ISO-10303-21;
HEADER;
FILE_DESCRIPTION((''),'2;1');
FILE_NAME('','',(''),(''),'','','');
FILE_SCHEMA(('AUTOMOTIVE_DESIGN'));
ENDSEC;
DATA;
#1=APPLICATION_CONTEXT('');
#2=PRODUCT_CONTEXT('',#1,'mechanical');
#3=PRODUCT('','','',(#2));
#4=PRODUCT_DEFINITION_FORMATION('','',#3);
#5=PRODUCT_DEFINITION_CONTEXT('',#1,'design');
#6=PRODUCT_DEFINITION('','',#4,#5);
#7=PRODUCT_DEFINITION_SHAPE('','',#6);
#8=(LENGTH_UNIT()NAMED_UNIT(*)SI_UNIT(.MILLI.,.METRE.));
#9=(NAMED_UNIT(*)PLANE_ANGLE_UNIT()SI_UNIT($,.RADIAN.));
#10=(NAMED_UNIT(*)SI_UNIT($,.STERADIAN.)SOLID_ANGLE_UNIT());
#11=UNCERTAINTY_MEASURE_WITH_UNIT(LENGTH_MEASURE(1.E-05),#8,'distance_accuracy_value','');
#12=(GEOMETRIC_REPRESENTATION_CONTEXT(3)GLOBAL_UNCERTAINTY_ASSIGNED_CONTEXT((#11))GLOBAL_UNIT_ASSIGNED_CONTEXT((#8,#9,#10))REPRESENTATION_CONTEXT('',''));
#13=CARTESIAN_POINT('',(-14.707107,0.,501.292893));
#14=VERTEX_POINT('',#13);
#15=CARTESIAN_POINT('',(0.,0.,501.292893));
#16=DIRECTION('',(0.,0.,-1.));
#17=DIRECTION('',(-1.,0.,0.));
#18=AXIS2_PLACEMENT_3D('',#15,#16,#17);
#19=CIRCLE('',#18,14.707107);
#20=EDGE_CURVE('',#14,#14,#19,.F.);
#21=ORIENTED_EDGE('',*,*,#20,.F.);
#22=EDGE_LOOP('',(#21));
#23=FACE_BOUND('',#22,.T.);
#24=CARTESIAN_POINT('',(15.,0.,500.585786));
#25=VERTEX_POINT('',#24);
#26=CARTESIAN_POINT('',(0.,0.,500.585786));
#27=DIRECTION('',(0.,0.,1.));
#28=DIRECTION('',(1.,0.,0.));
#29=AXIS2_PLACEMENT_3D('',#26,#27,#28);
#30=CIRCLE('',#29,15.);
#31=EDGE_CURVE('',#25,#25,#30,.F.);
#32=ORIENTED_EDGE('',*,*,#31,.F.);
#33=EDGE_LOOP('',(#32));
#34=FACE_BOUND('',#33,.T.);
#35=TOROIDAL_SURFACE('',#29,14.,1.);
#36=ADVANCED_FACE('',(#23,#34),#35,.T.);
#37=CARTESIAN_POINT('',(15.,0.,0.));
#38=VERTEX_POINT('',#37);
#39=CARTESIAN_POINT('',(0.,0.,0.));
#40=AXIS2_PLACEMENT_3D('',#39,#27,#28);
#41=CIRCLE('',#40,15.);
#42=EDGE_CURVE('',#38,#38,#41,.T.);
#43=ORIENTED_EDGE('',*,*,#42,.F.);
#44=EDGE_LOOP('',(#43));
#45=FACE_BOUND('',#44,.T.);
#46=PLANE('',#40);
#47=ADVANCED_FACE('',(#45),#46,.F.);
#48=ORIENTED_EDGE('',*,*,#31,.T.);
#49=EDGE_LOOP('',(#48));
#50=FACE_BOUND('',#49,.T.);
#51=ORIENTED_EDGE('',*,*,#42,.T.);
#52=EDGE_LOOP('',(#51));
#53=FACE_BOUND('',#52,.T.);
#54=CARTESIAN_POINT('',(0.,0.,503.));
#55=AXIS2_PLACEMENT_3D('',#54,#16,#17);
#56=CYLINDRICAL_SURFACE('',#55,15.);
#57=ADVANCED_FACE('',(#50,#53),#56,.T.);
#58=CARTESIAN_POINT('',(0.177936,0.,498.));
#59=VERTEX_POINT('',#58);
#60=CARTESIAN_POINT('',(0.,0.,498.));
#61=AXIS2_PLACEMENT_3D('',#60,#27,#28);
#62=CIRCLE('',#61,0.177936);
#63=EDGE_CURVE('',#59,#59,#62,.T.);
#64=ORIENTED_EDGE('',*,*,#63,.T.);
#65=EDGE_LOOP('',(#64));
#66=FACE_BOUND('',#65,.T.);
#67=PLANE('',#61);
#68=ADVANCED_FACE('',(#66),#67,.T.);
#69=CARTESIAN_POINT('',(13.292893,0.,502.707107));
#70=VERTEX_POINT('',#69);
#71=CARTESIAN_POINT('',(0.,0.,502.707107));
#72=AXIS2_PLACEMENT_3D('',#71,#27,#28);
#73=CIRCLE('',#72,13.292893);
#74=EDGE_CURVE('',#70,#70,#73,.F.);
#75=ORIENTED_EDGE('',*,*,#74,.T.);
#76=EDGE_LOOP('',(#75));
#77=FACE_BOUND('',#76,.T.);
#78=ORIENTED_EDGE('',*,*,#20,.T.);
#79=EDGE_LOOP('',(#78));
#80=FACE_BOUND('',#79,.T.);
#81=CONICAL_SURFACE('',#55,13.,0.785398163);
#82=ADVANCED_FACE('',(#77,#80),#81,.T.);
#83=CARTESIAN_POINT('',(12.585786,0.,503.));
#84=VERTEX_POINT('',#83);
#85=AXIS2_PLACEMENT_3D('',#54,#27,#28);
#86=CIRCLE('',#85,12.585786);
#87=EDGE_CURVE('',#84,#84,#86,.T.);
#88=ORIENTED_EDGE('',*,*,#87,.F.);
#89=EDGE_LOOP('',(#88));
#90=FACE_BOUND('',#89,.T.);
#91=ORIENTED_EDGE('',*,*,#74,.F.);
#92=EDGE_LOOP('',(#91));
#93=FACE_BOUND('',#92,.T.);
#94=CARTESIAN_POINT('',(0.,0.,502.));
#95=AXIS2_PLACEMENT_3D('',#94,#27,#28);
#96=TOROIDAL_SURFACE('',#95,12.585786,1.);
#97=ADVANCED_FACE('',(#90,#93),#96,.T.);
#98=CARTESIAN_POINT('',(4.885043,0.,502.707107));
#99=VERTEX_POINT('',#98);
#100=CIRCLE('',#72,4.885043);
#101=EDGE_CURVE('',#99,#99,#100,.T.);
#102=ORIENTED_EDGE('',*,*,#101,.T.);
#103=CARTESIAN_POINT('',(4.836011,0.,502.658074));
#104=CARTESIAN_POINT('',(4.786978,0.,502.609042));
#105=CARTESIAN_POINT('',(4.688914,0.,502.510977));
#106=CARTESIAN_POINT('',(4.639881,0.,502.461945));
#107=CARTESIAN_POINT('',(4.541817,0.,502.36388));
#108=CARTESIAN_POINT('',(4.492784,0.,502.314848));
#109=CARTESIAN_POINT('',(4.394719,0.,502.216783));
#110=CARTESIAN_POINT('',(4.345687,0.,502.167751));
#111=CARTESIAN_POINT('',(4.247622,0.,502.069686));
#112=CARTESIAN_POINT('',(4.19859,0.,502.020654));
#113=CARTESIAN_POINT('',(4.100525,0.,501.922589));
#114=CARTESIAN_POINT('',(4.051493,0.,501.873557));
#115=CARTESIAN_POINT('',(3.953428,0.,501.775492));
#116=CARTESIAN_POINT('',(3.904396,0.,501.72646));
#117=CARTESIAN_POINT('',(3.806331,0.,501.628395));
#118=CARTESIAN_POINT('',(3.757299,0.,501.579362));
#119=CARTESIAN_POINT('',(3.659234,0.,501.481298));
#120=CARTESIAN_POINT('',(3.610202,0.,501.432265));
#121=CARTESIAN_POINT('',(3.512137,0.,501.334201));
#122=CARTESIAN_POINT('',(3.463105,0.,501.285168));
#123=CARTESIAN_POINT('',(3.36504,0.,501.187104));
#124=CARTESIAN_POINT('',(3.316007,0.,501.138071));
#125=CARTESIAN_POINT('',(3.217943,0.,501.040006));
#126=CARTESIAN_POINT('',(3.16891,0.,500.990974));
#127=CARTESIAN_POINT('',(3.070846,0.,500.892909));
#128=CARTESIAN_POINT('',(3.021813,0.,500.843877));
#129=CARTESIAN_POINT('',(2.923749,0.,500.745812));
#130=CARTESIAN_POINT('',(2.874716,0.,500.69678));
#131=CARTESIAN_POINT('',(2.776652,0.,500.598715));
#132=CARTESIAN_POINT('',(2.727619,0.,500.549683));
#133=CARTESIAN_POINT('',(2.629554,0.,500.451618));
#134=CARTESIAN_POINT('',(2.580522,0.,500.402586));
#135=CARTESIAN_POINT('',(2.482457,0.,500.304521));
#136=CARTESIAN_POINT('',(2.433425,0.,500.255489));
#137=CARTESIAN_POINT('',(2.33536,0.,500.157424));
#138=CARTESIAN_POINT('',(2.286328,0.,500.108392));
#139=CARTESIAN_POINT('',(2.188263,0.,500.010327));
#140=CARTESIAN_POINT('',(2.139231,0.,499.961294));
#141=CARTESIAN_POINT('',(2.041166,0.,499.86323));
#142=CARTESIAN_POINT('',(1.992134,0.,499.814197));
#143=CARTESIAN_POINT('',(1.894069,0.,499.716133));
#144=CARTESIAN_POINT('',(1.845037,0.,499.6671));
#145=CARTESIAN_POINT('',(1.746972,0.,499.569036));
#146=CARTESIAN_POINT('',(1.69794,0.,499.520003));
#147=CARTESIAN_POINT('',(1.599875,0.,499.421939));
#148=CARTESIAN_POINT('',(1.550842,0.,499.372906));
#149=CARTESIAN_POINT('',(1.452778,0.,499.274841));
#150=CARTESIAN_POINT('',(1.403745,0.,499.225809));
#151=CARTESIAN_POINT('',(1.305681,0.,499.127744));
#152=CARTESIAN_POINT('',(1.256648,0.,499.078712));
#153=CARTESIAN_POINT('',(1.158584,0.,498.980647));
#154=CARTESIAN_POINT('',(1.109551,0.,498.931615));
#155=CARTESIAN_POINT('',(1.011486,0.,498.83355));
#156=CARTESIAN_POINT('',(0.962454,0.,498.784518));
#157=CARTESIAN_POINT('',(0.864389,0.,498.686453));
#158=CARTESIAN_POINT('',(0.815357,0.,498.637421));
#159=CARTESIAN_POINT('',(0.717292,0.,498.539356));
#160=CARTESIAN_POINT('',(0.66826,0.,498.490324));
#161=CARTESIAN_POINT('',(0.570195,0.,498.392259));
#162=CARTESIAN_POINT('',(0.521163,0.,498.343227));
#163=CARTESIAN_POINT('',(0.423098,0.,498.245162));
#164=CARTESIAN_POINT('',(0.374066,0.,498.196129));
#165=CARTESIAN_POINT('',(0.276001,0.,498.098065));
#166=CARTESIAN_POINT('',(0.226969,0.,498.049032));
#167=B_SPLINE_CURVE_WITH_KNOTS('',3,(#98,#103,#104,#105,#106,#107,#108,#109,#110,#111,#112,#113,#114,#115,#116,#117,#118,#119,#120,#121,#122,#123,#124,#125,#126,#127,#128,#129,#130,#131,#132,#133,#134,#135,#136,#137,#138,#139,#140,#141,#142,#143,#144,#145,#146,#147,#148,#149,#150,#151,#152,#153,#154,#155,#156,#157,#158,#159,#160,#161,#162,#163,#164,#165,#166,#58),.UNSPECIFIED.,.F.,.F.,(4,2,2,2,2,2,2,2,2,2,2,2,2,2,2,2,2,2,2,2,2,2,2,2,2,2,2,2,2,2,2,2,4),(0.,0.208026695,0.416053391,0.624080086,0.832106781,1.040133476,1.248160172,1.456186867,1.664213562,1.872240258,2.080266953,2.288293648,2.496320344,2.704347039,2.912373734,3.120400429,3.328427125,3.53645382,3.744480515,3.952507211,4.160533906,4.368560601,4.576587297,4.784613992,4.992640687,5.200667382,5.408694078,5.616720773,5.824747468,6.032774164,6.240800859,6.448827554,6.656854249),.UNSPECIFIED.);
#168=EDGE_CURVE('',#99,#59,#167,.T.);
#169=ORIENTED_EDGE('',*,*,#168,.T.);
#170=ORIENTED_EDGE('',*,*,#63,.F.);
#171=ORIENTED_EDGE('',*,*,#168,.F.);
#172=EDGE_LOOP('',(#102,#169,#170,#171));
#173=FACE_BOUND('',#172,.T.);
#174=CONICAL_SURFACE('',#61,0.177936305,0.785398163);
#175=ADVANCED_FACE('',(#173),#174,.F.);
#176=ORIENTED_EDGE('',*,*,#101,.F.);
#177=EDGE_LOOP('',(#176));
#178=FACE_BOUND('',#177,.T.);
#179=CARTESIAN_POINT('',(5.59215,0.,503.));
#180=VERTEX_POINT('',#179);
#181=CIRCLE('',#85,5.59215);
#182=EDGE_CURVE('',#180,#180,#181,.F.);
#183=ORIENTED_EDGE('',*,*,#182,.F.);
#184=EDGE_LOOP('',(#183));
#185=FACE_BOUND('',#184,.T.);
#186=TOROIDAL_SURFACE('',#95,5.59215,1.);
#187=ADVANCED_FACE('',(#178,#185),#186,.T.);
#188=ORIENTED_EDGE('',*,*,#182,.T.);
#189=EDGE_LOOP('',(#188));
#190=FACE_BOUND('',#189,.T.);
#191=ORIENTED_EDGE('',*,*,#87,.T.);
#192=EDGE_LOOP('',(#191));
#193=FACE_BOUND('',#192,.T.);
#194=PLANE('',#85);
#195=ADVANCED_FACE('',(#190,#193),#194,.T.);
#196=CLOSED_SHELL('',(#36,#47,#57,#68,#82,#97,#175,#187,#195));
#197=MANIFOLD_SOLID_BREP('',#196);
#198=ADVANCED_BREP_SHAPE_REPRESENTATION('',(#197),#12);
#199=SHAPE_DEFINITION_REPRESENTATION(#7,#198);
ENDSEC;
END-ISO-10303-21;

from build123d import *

# Parameters (mm, degrees)
SKETCH1_R           = 15
BOSS_EXTRUDE1_DEPTH = 503
CHAMFER1_SIZE       = 2
SKETCH2_R           = 5.177936305
CUT_EXTRUDE1_DEPTH  = 5
CHAMFER2_SIZE       = 5


with BuildPart() as part:
    # Sketch1 → Boss-Extrude1 (new body)
    with BuildSketch(Plane.XY):
        Circle(SKETCH1_R)
    extrude(amount=BOSS_EXTRUDE1_DEPTH)

    # Chamfer1
    chamfer1_edges = [part.edges().sort_by_distance(p)[0] for p in [
        (-15, 0, 503),
    ]]
    chamfer(chamfer1_edges, length=CHAMFER1_SIZE)

    # Sketch2 → Cut-Extrude1 (cut)
    with BuildSketch(Plane.XY.offset(503)):
        Circle(SKETCH2_R)
    extrude(amount=-CUT_EXTRUDE1_DEPTH, mode=Mode.SUBTRACT)

    # Chamfer2
    chamfer2_edges = [part.edges().sort_by_distance(p)[0] for p in [
        (-5.177936305, 0, 498),
    ]]
    chamfer(chamfer2_edges, length=CHAMFER2_SIZE - 0.0001)  # a hair under: the kernel refuses the full size

    # Fillet1: read off the stored shape, not the designer's step
    # Fillet1 outline → Fillet1 (revolve, cut)
    with BuildSketch(Plane.XZ):
        with BuildLine():
            ThreePointArc((14.707106781, 501.292893219), (14.923879533, 500.96846987), (15, 500.585786438))
            Line((15, 500.585786438), (15, 501.292893219))
            Line((15, 501.292893219), (14.707106781, 501.292893219))
        make_face()
        with BuildLine():
            ThreePointArc((12.585786438, 503), (12.96846987, 502.923879533), (13.292893219, 502.707106781))
            Line((13.292893219, 502.707106781), (13.292893219, 503))
            Line((13.292893219, 503), (12.585786438, 503))
        make_face()
        with BuildLine():
            ThreePointArc((4.885043086, 502.707106781), (5.209466435, 502.923879533), (5.592149867, 503))
            Line((5.592149867, 503), (4.885043086, 503))
            Line((4.885043086, 503), (4.885043086, 502.707106781))
        make_face()
    revolve(axis=Axis((0, 0, 0), (0, 0, 1)), mode=Mode.SUBTRACT)


solid = part.part
